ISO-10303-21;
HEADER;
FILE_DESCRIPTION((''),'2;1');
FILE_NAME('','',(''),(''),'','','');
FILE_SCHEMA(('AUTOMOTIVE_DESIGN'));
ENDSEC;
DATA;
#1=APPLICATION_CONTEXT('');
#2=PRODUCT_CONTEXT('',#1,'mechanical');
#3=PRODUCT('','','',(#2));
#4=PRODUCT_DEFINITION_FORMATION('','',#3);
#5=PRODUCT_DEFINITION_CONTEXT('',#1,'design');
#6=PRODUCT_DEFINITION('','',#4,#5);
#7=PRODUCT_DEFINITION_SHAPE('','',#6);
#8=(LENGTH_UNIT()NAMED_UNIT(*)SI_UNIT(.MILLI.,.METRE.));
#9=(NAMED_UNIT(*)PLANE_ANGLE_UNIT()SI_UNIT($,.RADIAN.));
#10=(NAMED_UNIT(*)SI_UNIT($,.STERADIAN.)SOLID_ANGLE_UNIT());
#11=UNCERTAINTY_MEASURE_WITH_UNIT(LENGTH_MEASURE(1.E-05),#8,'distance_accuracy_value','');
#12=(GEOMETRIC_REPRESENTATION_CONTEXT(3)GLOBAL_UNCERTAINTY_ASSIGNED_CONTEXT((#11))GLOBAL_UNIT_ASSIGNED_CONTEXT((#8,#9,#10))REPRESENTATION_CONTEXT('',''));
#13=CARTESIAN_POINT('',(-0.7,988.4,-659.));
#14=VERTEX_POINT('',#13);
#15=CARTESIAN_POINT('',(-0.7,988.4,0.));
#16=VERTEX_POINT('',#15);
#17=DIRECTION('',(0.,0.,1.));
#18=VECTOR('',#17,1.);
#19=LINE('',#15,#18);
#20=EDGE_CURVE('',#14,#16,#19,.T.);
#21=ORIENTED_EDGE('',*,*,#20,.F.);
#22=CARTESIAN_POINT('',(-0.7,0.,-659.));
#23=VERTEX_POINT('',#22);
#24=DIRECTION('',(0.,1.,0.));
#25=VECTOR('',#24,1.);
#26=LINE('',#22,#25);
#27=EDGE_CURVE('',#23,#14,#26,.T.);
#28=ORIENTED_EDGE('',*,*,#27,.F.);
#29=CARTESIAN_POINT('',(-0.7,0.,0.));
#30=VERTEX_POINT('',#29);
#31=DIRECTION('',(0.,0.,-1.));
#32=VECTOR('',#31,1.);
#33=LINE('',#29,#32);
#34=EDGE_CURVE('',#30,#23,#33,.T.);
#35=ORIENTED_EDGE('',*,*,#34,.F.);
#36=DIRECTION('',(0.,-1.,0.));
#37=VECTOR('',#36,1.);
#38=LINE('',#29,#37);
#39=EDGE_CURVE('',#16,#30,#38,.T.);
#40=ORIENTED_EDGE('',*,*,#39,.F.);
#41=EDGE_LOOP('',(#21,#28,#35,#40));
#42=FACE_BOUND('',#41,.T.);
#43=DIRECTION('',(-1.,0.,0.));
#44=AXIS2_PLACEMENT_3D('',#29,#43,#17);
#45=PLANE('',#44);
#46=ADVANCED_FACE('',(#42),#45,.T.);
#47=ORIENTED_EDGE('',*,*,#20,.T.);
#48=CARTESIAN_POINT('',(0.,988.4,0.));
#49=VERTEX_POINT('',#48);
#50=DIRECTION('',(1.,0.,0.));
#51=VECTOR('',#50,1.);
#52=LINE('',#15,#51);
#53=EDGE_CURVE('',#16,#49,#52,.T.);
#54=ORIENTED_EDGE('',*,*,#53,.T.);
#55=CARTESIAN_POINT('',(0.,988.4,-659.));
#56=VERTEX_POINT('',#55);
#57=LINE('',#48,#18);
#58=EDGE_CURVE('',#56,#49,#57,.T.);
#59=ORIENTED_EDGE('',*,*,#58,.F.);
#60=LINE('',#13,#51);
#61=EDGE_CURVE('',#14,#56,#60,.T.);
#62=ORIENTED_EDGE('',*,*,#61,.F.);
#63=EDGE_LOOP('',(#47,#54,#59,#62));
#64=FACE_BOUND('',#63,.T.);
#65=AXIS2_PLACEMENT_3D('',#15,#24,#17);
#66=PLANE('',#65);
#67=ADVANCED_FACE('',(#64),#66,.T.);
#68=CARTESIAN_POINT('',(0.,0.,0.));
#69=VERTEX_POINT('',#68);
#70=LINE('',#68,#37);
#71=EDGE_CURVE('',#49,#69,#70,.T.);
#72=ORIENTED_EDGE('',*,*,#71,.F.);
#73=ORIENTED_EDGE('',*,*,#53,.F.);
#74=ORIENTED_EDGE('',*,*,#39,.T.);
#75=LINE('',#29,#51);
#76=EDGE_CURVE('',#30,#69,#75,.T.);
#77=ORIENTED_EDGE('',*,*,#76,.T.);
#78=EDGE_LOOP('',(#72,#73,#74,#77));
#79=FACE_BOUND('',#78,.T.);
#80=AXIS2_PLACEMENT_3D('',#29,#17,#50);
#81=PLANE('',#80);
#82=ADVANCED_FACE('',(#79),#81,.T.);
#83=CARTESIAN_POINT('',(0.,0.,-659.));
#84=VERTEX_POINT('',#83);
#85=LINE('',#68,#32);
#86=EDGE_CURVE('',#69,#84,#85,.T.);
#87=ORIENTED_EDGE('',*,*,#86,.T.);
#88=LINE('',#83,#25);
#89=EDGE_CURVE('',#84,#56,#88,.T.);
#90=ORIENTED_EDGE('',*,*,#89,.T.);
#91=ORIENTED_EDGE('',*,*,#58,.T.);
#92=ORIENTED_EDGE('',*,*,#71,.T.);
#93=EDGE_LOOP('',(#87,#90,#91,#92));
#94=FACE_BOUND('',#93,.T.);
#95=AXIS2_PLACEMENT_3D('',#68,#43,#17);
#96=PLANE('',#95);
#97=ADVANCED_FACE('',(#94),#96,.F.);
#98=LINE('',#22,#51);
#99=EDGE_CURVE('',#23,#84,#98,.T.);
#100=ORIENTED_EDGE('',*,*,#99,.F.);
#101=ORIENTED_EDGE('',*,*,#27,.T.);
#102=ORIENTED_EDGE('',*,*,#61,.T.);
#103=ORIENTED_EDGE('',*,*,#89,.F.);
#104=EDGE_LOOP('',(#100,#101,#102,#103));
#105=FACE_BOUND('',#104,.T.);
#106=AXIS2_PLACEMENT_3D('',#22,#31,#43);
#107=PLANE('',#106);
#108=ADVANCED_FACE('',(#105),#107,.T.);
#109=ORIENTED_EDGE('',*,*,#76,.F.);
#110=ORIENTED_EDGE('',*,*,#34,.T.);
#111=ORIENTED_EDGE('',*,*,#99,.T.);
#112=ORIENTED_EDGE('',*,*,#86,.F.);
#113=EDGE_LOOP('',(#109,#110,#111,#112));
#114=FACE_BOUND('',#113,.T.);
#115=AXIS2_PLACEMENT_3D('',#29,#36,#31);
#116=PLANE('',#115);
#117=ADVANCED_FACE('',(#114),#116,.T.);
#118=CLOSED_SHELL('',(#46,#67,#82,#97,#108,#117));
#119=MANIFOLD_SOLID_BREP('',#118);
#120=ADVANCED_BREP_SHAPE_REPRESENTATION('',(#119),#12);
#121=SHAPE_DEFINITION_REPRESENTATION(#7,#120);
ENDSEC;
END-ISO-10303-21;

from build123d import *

# Parameters (mm, degrees)
SKETCH1_W          = 659
SKETCH1_H          = 988.4
BASE_FLANGE1_DEPTH = 0.7


# Sheet-metal steps are written as plain solids
with BuildPart() as part:
    # Sketch1 → Base-Flange1 (new body)
    with BuildSketch(Plane(origin=(0, 0, 0), x_dir=(0, 0, -1), z_dir=(1, 0, 0))):
        with Locations((329.5, 494.2)):
            Rectangle(SKETCH1_W, SKETCH1_H)
    extrude(amount=-BASE_FLANGE1_DEPTH)


solid = part.part
